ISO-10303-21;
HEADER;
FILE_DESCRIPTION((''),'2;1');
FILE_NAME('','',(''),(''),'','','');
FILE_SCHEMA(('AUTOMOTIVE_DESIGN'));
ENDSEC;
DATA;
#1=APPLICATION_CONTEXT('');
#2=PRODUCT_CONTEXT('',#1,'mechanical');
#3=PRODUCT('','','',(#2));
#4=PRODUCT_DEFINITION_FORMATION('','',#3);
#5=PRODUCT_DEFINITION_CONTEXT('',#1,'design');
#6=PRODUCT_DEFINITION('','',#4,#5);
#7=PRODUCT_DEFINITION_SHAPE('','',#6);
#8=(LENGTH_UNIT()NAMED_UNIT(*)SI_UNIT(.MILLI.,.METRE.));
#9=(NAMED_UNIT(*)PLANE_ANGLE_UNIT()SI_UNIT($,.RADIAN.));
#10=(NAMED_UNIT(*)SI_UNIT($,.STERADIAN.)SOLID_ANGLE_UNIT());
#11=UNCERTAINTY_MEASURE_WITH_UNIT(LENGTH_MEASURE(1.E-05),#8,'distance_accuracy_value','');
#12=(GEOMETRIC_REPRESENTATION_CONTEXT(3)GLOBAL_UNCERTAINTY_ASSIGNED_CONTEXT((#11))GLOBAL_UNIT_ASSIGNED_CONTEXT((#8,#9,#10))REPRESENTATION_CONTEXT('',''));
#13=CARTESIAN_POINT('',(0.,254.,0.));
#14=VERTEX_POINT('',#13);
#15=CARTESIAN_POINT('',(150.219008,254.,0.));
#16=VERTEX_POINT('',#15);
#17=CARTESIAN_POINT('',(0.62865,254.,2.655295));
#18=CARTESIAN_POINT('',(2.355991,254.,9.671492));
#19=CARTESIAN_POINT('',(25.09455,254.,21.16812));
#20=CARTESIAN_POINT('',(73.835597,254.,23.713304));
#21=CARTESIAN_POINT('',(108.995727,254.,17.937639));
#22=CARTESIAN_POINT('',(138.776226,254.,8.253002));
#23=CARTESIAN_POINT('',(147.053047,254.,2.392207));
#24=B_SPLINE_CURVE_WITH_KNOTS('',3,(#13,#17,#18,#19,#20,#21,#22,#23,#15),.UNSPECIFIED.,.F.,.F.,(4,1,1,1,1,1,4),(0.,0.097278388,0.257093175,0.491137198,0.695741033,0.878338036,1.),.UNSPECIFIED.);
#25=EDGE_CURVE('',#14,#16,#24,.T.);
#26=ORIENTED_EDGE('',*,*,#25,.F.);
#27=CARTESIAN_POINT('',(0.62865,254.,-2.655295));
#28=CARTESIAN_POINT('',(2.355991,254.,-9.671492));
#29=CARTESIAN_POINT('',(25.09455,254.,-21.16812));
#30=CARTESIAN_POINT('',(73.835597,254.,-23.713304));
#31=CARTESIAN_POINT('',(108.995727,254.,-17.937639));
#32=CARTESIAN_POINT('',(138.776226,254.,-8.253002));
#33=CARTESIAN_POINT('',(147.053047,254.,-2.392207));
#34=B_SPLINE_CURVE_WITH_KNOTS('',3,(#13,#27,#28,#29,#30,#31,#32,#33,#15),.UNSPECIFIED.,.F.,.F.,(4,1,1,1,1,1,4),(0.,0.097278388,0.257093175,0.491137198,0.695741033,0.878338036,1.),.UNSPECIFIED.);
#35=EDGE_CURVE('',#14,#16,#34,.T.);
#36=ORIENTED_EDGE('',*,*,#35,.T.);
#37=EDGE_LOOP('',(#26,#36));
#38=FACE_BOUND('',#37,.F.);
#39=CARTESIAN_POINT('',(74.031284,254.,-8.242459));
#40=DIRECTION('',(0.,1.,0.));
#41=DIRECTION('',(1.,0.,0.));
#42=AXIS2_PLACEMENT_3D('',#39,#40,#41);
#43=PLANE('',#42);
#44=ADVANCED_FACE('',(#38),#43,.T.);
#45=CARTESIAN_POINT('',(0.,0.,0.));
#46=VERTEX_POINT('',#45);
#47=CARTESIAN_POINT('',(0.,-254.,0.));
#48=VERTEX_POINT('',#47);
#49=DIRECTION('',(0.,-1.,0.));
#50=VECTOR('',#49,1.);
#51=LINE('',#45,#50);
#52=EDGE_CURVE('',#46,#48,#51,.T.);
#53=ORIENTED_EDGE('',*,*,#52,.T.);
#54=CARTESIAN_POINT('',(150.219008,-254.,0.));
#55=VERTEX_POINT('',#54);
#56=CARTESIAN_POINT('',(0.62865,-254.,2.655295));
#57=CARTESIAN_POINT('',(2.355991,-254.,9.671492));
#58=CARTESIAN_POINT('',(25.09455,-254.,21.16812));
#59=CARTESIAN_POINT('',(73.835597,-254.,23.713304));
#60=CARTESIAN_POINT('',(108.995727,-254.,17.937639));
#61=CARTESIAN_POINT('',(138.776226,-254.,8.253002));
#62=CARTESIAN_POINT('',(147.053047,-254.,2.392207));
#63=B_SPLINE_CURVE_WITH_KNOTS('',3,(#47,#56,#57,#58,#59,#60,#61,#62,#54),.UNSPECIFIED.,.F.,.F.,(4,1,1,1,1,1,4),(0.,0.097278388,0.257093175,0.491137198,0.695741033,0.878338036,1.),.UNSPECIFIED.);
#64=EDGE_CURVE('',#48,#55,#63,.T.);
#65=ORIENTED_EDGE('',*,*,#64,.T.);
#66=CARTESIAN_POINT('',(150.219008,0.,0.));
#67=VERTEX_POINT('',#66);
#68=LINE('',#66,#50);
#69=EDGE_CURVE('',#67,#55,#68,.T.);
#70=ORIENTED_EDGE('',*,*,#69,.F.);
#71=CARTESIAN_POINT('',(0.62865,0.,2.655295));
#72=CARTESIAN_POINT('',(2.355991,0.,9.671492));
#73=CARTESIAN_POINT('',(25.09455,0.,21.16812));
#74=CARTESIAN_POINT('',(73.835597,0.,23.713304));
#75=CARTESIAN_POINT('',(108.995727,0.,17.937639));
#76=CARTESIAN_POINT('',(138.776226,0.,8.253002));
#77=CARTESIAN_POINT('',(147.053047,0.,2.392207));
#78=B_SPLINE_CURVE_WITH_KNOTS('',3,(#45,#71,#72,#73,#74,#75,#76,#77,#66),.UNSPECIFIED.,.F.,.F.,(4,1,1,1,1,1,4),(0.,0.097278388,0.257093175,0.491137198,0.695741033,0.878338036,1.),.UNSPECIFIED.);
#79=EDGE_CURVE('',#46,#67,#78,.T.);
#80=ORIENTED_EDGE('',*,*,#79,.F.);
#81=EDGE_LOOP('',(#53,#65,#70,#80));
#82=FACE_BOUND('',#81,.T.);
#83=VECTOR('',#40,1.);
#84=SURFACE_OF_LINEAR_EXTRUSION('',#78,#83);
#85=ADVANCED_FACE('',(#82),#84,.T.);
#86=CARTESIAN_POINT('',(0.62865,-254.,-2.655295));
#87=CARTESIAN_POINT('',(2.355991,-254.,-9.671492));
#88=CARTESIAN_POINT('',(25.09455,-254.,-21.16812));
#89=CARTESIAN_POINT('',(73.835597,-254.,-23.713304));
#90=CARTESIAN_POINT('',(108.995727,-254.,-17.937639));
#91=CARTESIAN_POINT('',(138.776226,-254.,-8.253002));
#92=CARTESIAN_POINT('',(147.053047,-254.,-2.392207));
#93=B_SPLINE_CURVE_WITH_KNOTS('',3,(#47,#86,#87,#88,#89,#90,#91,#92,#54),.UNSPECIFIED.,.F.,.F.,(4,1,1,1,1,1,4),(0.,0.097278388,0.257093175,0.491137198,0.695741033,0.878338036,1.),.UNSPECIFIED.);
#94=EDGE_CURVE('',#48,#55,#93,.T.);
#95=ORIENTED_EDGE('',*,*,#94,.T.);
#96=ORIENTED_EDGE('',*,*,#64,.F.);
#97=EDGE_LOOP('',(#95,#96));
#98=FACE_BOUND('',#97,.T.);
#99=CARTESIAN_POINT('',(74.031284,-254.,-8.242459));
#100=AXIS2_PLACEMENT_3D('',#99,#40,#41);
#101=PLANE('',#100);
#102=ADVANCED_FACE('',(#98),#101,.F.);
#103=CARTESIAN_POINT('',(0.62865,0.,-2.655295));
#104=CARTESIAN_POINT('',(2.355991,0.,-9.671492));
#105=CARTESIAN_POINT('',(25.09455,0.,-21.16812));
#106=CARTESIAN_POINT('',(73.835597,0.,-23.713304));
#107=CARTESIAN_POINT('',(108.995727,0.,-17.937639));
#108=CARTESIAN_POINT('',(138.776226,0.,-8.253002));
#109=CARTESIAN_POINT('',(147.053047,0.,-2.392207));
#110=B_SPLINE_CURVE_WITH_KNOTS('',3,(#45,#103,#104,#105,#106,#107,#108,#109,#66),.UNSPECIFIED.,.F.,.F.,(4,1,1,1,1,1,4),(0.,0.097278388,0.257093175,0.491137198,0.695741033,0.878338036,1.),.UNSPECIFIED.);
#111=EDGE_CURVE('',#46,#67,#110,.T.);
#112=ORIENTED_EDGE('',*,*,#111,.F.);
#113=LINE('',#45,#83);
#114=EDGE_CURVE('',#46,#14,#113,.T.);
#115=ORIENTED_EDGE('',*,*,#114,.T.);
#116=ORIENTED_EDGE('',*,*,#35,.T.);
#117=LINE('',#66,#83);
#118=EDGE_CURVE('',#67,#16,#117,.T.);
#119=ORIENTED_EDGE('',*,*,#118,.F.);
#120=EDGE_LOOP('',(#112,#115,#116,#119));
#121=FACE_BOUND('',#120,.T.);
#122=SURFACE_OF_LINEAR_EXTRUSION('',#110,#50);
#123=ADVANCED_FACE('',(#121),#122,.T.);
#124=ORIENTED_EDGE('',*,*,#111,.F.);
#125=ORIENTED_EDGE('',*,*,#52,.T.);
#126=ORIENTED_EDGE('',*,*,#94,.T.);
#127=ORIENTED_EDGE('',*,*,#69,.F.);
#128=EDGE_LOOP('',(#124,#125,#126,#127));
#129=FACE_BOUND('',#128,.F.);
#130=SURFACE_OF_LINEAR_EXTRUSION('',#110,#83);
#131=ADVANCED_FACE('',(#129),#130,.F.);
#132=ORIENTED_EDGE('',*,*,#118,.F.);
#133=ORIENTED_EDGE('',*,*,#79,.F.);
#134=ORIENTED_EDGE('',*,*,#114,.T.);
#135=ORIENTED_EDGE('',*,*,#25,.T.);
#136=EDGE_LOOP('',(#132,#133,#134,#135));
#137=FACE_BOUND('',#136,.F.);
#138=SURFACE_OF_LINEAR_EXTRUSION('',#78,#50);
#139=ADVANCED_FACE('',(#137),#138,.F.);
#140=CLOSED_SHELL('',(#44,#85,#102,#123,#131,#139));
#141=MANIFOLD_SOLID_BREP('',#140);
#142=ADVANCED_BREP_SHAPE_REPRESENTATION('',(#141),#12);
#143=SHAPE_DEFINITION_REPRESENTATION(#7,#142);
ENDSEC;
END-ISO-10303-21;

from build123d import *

# Parameters (mm, degrees)
F1_DEPTH      = 254
F1_DEPTH_BACK = 254


with BuildPart() as f1:
    # F0 (on Front) → F1 (new body, two sides)
    with BuildSketch(Plane.XZ) as f1_sk:
        with BuildLine():
            add(Edge.make_bspline(
                [(0, 0), (0.6286497509, 2.6552953814), (2.3559909202, 9.671491677), (25.0945502442, 21.1681196487), (73.8355974202, 23.7133043543), (108.9957265805, 17.9376394921), (138.7762257202, 8.253001806), (147.0530470452, 2.3922072484), (150.2190083265, 0)],
                knots=[0, 0, 0, 0, 0.0972783885, 0.2570931753, 0.491137198, 0.6957410328, 0.8783380364, 1, 1, 1, 1], degree=3))
            Line((0, 0), (150.2190083265, 0))
        make_face()
    extrude(amount=F1_DEPTH)
    extrude(f1_sk.sketch, amount=-F1_DEPTH_BACK)

    # F2: F1 across face


with BuildPart() as f1_1:
    add(f1.part)
    add(f1.part.mirror(Plane(origin=(75.1095041633, 0, 0), x_dir=(1, 0, 0), z_dir=(0, 0, -1))))


solid = f1_1.part
